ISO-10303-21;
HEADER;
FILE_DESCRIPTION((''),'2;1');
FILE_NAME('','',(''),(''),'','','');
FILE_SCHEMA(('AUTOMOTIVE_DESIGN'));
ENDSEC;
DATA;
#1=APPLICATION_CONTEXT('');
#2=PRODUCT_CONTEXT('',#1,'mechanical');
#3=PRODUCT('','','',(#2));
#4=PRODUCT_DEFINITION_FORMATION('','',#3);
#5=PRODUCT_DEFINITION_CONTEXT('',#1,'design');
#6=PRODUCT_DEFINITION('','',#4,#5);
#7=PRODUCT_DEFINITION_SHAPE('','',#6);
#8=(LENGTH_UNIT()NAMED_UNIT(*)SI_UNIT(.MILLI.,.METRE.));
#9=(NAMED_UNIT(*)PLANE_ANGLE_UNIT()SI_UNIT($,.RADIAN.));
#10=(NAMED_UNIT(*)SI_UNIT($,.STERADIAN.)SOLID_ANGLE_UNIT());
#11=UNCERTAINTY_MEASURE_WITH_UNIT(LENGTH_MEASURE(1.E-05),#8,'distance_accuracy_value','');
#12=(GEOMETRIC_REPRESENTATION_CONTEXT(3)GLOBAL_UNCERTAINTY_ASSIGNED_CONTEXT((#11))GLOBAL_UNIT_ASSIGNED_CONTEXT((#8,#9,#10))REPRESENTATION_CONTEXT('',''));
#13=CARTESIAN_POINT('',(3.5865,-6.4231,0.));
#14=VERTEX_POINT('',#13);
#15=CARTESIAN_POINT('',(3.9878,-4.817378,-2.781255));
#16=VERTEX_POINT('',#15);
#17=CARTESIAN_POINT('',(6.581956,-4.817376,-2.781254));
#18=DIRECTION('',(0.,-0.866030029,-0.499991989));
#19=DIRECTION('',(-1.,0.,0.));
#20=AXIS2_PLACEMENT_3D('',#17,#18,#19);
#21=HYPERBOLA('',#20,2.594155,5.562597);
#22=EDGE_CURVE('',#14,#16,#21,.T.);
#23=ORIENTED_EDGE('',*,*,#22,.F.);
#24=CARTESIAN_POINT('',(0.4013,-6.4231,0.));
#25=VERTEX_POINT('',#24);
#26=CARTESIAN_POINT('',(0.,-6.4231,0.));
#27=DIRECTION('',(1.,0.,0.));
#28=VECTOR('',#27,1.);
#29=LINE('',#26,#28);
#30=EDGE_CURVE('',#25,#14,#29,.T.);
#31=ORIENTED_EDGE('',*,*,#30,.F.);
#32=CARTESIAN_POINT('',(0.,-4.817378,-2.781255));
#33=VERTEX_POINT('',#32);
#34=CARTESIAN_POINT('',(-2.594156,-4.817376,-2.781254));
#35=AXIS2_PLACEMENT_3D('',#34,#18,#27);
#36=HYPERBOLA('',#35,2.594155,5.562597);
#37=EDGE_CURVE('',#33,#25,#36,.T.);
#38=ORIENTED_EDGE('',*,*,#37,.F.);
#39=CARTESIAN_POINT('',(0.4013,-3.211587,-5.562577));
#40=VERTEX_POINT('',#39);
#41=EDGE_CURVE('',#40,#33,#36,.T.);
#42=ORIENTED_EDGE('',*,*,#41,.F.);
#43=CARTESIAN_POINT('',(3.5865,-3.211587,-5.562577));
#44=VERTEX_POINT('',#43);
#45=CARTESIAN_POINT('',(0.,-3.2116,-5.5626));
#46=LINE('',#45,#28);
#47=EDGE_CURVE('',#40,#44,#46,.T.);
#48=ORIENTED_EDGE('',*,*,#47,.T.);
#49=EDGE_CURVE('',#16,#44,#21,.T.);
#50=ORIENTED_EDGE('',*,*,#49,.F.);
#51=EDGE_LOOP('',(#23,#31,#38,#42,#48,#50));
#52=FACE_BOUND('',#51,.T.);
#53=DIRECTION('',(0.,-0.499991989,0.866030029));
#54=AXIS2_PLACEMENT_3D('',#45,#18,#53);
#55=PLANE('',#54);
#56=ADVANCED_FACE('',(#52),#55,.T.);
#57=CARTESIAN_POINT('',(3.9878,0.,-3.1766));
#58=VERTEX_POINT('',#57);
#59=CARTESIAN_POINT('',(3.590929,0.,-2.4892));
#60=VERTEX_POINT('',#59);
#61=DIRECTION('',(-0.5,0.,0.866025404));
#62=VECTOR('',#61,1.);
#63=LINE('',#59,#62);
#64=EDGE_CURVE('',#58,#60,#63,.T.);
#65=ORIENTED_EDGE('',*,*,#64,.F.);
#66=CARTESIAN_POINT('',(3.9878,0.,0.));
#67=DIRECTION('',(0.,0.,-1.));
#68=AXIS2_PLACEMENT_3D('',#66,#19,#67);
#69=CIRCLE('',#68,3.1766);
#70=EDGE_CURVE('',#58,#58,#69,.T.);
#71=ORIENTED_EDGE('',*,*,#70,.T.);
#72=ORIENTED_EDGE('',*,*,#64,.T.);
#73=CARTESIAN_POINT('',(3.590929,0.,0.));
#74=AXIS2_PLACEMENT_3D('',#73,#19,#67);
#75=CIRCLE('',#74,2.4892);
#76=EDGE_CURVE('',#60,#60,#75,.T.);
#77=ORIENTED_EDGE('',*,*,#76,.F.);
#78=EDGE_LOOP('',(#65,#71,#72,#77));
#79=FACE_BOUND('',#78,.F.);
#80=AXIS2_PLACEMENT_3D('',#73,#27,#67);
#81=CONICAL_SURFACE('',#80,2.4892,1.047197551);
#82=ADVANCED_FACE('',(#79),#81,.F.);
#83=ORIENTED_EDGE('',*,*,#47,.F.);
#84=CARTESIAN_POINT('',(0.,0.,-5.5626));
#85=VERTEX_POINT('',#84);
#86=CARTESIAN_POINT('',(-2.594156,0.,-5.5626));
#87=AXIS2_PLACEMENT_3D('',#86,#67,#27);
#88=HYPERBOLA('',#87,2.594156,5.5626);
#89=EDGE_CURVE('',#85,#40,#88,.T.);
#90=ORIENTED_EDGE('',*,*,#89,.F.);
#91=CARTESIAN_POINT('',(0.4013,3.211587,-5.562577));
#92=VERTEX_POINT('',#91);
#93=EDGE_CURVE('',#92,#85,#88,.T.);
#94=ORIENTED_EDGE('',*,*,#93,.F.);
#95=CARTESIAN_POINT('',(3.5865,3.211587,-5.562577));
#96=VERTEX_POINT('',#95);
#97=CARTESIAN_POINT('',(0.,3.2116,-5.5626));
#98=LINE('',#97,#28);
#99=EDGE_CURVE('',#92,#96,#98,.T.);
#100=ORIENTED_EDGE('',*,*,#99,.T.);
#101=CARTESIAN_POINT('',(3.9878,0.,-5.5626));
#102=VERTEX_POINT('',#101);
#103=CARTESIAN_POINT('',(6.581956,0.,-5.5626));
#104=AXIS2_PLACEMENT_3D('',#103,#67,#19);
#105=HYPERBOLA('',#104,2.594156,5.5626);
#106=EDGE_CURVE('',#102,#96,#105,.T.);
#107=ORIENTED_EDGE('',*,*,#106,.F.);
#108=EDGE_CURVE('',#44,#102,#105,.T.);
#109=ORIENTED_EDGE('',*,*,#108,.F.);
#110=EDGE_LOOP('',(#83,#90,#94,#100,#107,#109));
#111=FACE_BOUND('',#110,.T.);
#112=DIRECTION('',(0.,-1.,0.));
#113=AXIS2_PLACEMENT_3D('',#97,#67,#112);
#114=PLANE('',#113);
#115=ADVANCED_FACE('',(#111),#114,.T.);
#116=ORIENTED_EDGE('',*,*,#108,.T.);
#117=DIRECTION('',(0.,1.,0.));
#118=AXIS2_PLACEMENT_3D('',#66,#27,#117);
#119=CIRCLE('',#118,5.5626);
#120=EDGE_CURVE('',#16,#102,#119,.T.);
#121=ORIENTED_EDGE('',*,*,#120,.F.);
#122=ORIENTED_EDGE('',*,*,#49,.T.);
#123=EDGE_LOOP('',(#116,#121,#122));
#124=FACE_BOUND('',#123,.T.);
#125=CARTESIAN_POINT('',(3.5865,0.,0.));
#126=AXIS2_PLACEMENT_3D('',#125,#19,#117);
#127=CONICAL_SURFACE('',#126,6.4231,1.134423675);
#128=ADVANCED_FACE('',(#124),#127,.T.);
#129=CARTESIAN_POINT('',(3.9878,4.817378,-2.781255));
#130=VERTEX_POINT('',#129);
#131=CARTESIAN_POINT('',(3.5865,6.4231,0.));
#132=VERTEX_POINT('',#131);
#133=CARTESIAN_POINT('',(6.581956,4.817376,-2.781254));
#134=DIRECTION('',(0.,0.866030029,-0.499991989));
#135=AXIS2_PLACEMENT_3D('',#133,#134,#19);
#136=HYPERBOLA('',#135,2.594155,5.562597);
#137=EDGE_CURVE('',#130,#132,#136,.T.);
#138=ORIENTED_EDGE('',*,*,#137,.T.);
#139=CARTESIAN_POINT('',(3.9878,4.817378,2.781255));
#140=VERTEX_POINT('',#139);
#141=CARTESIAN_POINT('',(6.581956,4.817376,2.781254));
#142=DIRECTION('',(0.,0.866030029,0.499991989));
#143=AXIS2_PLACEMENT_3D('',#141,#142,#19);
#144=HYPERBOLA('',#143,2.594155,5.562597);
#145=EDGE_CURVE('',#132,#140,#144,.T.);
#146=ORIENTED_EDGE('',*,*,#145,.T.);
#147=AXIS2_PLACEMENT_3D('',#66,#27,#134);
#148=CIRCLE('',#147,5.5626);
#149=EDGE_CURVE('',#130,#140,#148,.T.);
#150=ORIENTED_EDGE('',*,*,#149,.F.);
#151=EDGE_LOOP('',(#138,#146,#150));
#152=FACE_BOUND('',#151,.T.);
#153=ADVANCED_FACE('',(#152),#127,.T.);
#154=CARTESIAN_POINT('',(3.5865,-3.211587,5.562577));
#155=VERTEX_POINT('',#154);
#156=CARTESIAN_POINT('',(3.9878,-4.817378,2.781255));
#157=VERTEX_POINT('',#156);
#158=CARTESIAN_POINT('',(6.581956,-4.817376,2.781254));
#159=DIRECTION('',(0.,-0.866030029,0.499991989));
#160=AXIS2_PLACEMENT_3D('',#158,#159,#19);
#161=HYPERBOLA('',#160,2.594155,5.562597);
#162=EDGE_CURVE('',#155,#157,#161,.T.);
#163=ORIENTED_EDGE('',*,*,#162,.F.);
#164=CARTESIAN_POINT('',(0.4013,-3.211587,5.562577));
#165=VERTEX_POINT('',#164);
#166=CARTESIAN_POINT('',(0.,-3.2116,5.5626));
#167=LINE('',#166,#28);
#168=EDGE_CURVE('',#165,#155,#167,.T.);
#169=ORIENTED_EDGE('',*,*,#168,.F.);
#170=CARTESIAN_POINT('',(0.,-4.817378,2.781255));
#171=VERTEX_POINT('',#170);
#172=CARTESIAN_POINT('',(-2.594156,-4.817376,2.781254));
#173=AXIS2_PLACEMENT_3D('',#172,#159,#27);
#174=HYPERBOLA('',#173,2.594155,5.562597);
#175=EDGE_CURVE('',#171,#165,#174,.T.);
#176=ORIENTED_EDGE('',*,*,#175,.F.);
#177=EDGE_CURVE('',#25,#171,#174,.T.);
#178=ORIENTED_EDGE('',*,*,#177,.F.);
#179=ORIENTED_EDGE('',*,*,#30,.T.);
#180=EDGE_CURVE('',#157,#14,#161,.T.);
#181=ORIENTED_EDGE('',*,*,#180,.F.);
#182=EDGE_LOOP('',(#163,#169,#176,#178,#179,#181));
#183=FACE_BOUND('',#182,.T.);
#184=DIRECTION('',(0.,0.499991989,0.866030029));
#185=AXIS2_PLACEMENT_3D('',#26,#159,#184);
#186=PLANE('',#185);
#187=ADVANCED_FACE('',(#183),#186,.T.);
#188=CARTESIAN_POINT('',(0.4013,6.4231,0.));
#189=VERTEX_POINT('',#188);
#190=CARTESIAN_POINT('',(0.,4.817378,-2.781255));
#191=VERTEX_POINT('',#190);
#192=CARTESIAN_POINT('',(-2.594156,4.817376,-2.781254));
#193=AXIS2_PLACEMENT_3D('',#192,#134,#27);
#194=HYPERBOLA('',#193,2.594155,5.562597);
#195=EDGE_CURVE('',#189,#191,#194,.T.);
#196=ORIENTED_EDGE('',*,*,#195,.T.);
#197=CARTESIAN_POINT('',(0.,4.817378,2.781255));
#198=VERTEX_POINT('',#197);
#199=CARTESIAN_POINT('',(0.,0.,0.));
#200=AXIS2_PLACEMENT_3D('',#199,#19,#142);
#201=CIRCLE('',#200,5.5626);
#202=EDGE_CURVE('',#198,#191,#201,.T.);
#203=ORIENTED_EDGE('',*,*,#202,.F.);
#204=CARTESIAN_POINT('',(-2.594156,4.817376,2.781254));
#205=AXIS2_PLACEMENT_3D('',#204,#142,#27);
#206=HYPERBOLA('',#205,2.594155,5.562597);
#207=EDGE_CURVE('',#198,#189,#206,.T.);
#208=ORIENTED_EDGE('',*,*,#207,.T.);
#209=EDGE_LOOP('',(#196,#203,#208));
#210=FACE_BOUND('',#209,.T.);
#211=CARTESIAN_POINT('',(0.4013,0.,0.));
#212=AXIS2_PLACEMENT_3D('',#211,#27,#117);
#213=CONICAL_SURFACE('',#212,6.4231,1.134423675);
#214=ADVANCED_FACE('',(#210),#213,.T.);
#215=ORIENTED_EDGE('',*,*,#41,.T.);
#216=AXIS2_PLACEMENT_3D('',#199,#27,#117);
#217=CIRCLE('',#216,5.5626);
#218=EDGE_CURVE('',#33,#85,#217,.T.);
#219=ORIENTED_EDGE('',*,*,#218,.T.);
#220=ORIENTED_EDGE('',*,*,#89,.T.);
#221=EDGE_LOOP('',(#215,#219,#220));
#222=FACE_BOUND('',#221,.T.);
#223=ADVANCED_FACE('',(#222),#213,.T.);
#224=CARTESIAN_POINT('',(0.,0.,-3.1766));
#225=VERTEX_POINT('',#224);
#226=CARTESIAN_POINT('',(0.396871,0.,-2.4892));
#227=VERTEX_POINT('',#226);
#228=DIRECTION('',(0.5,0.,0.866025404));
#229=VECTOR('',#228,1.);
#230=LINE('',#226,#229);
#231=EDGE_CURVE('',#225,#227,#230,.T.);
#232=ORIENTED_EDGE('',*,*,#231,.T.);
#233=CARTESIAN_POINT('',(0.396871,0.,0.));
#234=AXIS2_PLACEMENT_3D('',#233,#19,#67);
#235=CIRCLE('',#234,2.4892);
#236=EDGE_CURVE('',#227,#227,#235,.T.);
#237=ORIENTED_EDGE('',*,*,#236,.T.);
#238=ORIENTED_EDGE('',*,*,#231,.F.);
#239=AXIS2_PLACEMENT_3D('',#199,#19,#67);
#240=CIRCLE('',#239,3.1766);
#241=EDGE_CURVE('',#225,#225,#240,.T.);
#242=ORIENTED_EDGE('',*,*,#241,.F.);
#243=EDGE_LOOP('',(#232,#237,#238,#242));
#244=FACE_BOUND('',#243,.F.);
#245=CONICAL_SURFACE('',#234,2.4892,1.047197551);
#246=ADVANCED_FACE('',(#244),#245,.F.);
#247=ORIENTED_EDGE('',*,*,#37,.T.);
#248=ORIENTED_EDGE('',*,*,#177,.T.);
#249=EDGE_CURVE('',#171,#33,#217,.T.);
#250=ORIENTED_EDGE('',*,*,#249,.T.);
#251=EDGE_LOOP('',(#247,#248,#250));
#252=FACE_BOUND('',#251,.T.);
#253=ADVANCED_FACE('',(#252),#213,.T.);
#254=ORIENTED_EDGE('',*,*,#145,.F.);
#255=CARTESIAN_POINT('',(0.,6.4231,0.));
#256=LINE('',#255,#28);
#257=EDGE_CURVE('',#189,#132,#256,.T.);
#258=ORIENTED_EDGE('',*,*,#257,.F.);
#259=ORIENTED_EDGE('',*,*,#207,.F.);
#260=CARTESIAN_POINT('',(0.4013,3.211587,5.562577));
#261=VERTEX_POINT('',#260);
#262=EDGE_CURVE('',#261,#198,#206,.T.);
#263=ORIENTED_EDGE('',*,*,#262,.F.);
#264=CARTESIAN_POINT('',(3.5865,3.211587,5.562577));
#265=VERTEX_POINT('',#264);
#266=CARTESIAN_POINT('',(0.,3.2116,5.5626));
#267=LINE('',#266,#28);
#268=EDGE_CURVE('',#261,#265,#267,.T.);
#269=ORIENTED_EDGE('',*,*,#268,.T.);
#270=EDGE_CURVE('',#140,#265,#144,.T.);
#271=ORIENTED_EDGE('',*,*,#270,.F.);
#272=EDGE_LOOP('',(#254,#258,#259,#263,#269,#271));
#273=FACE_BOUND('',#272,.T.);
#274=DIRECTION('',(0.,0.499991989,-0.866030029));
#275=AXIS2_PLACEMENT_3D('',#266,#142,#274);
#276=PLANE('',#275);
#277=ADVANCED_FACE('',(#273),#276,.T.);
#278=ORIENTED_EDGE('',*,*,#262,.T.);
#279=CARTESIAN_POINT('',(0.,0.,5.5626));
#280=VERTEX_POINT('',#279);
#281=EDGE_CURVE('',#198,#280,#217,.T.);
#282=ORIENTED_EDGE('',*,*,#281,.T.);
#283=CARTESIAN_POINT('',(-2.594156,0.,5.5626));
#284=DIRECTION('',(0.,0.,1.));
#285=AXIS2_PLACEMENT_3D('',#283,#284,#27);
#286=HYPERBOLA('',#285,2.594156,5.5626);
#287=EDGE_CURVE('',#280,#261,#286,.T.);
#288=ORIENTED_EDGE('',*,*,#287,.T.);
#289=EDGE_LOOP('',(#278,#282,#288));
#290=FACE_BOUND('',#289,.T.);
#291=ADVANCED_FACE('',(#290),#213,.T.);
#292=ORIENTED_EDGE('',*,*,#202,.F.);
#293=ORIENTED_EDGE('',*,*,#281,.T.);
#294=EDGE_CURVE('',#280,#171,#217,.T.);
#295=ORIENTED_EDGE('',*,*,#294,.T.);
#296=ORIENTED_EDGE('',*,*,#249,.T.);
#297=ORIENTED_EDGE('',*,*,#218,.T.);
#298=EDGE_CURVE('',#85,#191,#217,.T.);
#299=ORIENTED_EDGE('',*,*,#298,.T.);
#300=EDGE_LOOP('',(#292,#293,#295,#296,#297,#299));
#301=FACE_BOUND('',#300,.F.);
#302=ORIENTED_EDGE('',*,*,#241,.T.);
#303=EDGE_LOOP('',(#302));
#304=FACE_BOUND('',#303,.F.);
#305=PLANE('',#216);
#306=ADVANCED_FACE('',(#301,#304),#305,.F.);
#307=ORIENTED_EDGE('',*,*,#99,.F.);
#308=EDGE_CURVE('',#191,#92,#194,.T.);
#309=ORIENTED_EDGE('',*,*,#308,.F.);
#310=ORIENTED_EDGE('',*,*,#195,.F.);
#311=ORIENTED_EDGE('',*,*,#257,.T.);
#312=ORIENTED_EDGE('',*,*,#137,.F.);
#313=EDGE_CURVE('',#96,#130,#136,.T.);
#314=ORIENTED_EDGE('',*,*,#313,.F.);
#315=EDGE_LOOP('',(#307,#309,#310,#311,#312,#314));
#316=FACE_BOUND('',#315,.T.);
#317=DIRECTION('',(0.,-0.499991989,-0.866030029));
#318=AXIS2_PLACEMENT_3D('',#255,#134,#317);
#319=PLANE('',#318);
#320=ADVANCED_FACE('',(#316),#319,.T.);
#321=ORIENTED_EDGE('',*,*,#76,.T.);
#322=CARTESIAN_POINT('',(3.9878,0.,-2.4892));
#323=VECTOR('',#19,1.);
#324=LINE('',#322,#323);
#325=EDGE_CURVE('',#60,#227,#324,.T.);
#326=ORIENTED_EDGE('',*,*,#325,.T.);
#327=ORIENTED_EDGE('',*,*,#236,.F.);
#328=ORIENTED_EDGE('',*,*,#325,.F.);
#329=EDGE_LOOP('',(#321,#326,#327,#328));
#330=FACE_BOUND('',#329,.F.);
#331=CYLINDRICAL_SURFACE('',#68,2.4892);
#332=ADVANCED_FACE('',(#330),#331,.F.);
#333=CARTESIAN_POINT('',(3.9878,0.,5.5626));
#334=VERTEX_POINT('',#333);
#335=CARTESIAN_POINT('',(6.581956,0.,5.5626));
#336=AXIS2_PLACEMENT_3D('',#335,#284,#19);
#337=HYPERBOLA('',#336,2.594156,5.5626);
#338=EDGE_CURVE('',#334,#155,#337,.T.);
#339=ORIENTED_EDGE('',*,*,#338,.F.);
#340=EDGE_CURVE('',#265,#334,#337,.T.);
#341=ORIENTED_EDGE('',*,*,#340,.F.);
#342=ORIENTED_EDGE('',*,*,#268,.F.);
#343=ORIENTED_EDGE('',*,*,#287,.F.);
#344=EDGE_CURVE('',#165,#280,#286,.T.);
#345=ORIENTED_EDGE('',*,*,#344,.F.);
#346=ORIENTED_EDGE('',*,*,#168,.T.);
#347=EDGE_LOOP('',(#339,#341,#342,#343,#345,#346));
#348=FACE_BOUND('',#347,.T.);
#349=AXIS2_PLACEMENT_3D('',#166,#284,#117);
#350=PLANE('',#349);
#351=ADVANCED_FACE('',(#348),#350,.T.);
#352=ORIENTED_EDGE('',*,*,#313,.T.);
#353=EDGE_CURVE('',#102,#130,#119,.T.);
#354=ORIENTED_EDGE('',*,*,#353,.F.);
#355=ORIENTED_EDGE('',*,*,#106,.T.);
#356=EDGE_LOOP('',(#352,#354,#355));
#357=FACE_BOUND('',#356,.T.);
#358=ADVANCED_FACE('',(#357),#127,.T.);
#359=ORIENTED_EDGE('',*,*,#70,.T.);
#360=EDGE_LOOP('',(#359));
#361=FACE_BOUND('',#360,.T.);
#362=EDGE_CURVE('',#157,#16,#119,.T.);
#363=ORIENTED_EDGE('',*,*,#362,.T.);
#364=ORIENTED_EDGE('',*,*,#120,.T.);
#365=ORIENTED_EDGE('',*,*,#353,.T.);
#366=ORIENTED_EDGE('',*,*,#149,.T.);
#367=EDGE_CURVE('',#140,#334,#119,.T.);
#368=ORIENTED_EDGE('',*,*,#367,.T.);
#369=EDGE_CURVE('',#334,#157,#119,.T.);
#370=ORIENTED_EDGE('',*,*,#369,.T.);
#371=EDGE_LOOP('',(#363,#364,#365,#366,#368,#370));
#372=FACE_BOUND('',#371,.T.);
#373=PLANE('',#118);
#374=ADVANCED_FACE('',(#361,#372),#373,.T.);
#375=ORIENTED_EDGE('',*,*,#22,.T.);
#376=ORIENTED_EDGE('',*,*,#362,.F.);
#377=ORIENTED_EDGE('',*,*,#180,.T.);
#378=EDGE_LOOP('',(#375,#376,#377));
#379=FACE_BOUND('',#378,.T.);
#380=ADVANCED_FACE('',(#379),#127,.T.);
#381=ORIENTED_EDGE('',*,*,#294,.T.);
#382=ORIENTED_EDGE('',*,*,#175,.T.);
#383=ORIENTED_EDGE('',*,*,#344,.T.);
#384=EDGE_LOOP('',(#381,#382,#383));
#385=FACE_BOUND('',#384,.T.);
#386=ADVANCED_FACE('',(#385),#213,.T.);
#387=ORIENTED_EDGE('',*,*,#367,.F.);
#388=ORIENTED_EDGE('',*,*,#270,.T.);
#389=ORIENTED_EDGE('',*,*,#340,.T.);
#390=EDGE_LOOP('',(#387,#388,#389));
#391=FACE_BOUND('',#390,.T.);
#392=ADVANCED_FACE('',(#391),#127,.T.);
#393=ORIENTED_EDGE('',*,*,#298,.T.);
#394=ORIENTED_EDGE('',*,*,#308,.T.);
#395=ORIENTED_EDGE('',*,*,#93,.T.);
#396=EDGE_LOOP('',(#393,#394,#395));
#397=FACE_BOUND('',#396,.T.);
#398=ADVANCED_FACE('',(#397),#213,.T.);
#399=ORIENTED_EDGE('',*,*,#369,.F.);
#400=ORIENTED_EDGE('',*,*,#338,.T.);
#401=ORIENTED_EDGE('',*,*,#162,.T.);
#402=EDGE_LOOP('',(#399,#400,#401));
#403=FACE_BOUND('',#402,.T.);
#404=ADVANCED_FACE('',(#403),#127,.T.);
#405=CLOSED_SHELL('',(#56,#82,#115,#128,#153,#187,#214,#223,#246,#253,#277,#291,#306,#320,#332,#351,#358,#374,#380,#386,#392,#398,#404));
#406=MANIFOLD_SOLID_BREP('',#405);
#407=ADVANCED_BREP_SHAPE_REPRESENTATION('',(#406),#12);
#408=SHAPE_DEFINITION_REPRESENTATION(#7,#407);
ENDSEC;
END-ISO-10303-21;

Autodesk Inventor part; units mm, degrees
ref_plane "YZ Plane" through (0, 0, 0) normal (1, 0, 0) x (0, 1, 0)
ref_plane "XZ Plane" through (0, 0, 0) normal (0, 1, 0) x (-1, 0, 0)
sketch "Sketch1" plane through (0, 0, 0) normal (1, 0, 0) x (0, 1, 0)
  line L0 (-6.4231, 0) -> (-3.2116, 5.5626)
  line L1 (-3.2116, 5.5626) -> (3.2116, 5.5626)
  line L2 (3.2116, 5.5626) -> (6.4231, 0)
  line L3 (6.4231, 0) -> (3.2116, -5.5626)
  line L4 (3.2116, -5.5626) -> (-3.2116, -5.5626)
  line L5 (-3.2116, -5.5626) -> (-6.4231, 0)
  point P0 (0, 0)
  point P1 (0, 0)
  dimension "d0" = 12.8463
extrude "Body" add sketch "Sketch1" along normal blind 3.9878
sketch "Sketch2" plane through (0, 0, 0) normal (0, 0, 1) x (1, 0, 0)
  line L0 (0, 3.2116) -> (0, 6.4231) projected
  line L1 (0, 6.4231) -> (3.9878, 6.4231) projected
  line L2 (3.9878, 3.2116) -> (3.9878, 6.4231) projected
  line L3 (-0.7976, 0) -> (4.7854, 0) projected
  line L4 (0.4013, 6.4231) -> (0, 5.5626)
  line L5 (3.5865, 6.4231) -> (3.9878, 5.5626)
  dimension "d3" = 25
  dimension "d4" = 25
  dimension "d5" = 11.1252
  dimension "d6" = 11.1252
revolve "Chamfer1" cut sketch "Sketch2" angle 360 about axis through (-10, 0, 0) along (1, 0, 0)
sketch "Sketch3" plane through (3.9878, 0, 0) normal (1, 0, 0) x (0, 0, -1)
  arc A0 (-2.7813, -4.8174) -> (2.7813, -4.8174) centre (0, 0) ccw projected
hole "Thread" at (3.9878, 0, 0) direction (-1, 0, 0) diameter 4.9784 end through all thread size "1/4-20 UNC" class "2B" standard "ANSI Unified Screw Threads"
chamfer "Chamfer2" distance 0.6874 angle 30 1 edges at (3.9878, 0, 2.4892) measured on face at (3.9878, 4.5118, 0.1)
chamfer "Chamfer3" distance 0.6874 angle 30 1 edges at (0, 0, 2.4892) measured on face at (0, 4.5118, 0.1)
ref_plane "Work Plane1" through (-13.4678, 0, 0) normal (0, -0.8660254, -0.5) x (1, 0, 0)
equation "\"d0\" = 1.1547 * SW"
equation "\"d1\" = KOH"
equation "\"d3\" = ANG1"
equation "\"d4\" = ANG2"
equation "\"d5\" = SW0"
equation "\"d6\" = SW01"
equation "\"d8\" = -0.5 * GD1 + 0.5 * NND"
equation "\"d40\" = -0.5 * GD1 + 0.5 * NND"
equation "\"d10\" = -0.5 * GD1 + 0.5 * NND"
equation "\"d41\" = -0.5 * GD1 + 0.5 * NND"
equation "\"ANG1\" = 25deg"
equation "\"ANG2\" = 25deg"
equation "\"NND\" = 6.35"
equation "\"KOH\" = 3.9878"
equation "\"SW\" = 11.1252"
equation "\"SW0\" = SW"
equation "\"SW01\" = SW"
equation "\"THREADDIA\" = 6.35"
equation "\"TOA\" = 30deg"
equation "\"E0\" = 1.155 * SW"
equation "\"GD1\" = 4.975185"
properties part number "ANSI B18.2.2 - 1/4 - 20, HJNI" material "Steel, Mild"
